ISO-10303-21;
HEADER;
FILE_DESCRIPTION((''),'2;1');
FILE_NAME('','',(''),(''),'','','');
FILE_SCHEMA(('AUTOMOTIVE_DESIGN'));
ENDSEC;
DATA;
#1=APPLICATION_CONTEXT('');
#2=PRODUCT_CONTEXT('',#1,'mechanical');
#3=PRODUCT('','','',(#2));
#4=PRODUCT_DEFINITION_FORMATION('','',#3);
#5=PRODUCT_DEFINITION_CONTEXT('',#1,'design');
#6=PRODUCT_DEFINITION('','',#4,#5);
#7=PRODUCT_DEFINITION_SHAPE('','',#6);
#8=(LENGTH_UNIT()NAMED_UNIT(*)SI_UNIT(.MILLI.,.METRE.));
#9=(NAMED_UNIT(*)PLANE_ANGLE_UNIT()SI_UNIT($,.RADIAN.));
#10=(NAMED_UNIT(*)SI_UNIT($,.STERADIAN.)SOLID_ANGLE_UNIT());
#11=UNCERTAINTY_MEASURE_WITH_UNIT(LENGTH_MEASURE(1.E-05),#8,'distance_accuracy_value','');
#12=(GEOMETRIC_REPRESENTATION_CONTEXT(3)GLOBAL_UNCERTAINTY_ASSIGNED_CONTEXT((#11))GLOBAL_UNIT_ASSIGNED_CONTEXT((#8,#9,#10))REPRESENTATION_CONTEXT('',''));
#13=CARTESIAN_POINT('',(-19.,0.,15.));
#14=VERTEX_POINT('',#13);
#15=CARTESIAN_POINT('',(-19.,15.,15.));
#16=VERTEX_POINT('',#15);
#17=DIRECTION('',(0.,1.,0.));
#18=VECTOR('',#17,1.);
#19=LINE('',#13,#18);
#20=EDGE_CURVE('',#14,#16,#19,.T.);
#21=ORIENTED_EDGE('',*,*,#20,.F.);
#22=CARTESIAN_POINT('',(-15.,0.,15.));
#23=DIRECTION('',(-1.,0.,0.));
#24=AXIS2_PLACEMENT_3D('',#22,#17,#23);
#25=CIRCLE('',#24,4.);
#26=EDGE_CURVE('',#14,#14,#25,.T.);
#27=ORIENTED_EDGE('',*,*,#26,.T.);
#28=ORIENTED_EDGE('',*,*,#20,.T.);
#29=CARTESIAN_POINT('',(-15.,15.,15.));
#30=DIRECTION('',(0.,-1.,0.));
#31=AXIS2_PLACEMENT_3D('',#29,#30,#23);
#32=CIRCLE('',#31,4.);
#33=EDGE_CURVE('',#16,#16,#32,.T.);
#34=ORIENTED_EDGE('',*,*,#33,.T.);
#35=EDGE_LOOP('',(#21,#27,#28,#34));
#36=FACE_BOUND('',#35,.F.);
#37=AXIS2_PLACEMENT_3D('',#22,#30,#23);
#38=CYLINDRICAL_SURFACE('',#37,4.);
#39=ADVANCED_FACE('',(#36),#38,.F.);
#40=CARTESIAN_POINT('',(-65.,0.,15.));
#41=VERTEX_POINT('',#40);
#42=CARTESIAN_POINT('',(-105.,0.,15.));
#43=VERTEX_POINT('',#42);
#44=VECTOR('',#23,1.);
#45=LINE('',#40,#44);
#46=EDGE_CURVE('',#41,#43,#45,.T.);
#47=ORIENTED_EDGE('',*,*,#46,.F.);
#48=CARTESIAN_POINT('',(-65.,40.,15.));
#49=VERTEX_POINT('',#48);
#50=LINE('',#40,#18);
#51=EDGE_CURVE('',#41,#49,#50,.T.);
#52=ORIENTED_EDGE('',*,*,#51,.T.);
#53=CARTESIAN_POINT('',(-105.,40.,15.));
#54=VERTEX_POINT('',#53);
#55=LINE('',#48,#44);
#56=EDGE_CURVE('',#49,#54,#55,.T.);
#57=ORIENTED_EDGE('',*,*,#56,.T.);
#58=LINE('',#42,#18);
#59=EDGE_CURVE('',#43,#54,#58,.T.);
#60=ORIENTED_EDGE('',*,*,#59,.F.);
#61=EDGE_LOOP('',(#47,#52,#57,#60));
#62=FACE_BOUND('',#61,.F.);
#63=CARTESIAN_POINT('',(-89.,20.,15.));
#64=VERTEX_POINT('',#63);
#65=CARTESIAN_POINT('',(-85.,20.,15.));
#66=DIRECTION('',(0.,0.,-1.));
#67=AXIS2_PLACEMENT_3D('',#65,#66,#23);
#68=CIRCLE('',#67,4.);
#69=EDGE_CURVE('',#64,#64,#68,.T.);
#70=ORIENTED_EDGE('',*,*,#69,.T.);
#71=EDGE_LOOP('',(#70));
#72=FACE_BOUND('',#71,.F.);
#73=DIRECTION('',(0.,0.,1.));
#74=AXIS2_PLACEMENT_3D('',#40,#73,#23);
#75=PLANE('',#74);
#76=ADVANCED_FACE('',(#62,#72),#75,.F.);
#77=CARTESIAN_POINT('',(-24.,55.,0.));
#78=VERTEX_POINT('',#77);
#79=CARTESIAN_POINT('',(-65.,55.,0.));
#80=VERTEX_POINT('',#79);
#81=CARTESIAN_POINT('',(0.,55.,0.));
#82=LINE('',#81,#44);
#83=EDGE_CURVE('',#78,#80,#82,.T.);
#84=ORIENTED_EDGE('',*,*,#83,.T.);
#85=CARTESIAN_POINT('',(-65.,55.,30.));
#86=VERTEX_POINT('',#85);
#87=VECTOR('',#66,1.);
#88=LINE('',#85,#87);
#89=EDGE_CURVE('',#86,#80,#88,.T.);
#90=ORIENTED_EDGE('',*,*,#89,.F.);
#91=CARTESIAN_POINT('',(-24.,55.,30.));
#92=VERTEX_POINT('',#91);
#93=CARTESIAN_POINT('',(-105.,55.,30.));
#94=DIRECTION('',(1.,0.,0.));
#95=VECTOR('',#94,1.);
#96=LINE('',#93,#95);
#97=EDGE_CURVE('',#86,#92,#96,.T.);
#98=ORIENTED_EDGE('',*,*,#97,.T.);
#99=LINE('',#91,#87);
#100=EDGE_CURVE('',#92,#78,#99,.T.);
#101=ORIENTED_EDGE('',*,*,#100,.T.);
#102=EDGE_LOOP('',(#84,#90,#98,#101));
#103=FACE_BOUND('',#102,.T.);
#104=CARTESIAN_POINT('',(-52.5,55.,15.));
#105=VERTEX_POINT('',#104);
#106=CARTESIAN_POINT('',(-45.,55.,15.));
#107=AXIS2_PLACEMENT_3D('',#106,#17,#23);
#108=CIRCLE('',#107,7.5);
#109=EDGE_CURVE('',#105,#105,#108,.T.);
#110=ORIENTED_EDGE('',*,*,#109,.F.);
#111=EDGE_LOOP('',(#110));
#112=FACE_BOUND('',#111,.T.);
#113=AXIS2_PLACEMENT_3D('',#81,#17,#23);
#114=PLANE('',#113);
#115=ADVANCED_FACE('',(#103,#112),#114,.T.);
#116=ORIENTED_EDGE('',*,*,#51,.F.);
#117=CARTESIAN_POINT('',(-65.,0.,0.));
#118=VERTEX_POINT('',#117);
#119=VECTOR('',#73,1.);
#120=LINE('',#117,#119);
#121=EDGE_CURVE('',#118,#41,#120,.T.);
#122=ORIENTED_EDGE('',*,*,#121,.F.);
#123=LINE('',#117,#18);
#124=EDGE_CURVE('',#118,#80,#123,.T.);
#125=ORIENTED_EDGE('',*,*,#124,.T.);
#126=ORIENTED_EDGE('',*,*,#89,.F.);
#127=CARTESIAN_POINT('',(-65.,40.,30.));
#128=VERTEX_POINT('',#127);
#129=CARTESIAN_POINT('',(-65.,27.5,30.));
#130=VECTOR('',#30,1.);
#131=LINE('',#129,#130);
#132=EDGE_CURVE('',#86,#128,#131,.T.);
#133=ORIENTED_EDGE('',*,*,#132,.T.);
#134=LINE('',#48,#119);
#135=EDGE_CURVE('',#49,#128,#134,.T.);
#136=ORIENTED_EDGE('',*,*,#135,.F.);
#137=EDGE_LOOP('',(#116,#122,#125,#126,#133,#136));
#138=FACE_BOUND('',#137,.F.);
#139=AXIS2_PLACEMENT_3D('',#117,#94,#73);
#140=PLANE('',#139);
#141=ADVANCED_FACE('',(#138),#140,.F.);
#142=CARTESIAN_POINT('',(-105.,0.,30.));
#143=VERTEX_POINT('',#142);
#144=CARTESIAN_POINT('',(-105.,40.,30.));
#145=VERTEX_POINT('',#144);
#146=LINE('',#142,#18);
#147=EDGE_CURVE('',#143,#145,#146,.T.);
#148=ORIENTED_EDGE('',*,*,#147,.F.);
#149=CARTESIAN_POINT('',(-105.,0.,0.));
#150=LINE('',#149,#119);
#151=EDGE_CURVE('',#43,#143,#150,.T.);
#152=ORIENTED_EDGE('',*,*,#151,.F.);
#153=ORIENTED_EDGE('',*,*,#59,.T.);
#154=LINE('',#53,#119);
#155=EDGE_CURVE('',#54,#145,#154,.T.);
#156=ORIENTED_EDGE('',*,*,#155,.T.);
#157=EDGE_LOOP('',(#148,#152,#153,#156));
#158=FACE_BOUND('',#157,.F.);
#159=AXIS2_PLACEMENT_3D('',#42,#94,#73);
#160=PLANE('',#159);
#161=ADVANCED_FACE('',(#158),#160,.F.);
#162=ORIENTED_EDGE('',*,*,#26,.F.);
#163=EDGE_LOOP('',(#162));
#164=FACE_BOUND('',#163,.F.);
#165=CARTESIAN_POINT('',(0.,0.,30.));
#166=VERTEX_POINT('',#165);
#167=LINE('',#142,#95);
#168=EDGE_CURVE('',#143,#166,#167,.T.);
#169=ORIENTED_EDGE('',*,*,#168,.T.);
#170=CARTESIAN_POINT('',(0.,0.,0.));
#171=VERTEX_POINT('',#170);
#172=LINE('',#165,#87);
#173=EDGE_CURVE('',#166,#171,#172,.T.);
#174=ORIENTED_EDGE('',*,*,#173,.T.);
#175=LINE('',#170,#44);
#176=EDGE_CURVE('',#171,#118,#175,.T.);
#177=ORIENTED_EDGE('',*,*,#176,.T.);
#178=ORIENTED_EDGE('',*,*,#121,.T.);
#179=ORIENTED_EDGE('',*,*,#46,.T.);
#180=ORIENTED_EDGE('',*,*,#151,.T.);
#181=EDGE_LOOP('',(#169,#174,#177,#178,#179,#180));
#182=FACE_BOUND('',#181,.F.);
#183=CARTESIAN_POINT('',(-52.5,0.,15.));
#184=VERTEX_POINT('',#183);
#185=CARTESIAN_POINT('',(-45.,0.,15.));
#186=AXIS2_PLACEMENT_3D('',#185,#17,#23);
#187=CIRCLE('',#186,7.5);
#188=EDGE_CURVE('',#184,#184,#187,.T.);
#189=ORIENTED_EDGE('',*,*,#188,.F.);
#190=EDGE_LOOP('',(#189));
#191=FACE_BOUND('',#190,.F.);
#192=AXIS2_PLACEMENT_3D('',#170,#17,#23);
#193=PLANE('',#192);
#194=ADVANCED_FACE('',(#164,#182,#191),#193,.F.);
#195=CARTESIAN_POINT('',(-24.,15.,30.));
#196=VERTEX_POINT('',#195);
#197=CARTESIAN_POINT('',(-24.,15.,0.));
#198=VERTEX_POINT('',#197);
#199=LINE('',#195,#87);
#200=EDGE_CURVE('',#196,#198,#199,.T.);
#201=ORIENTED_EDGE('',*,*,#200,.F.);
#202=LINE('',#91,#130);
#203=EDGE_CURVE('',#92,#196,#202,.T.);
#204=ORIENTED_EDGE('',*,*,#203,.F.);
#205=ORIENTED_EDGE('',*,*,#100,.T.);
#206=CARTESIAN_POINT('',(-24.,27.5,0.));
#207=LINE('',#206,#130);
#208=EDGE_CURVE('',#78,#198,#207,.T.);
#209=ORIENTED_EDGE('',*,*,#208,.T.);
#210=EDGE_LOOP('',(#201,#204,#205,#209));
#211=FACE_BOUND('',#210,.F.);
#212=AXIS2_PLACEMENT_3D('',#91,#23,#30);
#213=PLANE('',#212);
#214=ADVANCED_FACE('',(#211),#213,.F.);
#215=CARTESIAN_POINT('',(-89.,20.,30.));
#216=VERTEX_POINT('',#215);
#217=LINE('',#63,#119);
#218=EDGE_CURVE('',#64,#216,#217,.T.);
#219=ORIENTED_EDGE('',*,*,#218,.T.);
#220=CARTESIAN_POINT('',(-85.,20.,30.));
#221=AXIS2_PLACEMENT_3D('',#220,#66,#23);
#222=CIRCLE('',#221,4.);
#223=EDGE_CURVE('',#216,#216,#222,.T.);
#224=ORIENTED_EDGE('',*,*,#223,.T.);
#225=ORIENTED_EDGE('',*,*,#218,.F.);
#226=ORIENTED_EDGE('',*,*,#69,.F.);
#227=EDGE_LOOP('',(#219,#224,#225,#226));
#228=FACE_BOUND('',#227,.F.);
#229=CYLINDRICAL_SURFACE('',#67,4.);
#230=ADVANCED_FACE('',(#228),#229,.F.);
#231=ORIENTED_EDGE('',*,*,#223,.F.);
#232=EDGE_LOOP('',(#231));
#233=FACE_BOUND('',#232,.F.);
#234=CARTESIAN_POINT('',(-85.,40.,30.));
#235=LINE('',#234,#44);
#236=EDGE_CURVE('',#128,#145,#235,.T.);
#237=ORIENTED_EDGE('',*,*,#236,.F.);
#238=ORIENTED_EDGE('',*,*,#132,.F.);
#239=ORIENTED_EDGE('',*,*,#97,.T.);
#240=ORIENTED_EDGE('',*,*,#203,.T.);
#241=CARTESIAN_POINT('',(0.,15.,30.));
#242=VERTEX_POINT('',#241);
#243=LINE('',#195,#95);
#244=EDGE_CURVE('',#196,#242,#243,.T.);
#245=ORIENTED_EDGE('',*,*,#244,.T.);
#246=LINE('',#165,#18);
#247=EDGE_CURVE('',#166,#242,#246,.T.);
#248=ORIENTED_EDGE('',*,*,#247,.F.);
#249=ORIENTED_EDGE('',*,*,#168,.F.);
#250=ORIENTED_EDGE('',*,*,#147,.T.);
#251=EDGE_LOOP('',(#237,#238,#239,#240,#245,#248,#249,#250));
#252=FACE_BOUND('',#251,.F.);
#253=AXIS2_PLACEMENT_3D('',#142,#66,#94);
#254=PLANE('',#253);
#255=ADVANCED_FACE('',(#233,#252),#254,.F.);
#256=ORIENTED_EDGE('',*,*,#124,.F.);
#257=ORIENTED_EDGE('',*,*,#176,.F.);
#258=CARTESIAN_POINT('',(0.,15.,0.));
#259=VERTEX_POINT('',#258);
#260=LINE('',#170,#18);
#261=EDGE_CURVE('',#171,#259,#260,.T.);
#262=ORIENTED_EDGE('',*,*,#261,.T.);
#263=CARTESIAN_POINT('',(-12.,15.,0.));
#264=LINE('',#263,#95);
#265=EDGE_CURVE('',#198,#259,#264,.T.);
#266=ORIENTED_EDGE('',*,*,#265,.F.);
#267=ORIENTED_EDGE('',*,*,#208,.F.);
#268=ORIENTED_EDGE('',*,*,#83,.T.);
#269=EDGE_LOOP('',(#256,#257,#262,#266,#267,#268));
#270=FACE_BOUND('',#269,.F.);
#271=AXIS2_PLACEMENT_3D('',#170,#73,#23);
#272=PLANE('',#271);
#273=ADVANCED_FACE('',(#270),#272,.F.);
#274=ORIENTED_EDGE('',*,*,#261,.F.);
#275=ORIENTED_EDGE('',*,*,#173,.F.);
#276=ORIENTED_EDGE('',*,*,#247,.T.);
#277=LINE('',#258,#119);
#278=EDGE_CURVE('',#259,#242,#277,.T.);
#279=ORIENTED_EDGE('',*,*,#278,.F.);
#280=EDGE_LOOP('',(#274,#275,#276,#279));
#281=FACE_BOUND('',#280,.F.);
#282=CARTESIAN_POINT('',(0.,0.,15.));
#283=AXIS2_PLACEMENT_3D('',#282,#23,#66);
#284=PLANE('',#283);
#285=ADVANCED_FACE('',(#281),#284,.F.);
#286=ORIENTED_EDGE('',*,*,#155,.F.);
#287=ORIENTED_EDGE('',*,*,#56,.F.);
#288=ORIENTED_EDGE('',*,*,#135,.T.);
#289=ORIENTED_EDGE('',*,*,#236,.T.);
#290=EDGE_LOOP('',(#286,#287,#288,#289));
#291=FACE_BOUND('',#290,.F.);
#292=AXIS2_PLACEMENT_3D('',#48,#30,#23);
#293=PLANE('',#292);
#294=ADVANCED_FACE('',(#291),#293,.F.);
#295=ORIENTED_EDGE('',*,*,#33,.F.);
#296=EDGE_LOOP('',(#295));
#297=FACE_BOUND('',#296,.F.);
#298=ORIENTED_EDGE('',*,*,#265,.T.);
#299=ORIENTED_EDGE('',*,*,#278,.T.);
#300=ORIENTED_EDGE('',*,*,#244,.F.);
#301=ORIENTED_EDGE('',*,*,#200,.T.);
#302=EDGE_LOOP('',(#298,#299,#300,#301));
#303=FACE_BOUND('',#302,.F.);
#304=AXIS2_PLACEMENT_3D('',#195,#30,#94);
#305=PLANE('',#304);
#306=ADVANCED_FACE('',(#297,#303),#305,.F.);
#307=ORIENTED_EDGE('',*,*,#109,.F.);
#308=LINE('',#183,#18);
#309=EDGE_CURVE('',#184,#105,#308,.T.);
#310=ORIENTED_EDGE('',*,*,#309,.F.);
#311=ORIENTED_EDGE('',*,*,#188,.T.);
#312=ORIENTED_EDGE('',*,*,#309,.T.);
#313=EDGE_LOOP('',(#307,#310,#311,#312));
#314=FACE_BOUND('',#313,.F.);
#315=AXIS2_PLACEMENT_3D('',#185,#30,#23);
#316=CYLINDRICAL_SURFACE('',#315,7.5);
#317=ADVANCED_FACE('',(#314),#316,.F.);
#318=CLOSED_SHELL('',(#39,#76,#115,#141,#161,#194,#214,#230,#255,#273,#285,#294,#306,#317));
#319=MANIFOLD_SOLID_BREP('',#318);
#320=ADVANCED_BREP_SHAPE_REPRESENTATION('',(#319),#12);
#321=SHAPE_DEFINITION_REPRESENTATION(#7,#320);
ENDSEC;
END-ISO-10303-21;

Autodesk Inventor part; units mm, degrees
ref_plane "YZ Plane" through (0, 0, 0) normal (1, 0, 0) x (0, 1, 0)
ref_plane "XZ Plane" through (0, 0, 0) normal (0, 1, 0) x (-1, 0, 0)
ref_plane "XY Plane" through (0, 0, 0) normal (0, 0, 1) x (1, 0, 0)
sketch "Sketch1" plane through (0, 0, 0) normal (0, 1, 0) x (-1, 0, 0)
  line L0 (0, 0) -> (105, 0)
  line L1 (105, 0) -> (105, 30)
  line L2 (105, 30) -> (0, 30)
  line L3 (0, 30) -> (0, 0)
  line L4 (105, 0) -> (65, 0)
  line L5 (65, 0) -> (65, 15)
  line L6 (65, 15) -> (105, 15)
  line L7 (105, 15) -> (105, 0)
  line L8 (0, 15) -> (15, 15)
  line L9 (15, 15) -> (45, 15)
  circle A0 centre (15, 15) radius 4
  circle A1 centre (45, 15) radius 7.5
  dimension "d0" = 105
  dimension "d1" = 30
  dimension "d2" = 40
  dimension "d3" = 15
  dimension "d4" = 15
  dimension "d5" = 30
  dimension "d6" = 8
  dimension "d7" = 15
extrude "Extrusion1" add sketch "Sketch1" along normal blind 55 contours L3 L2 L1 L6 L5 L0
sketch "Sketch2" plane through (-105, 0, 30) normal (0, 0, 1) x (1, 0, 0)
  line L0 (105, 55) -> (81, 55)
  line L1 (81, 55) -> (81, 15)
  line L2 (81, 15) -> (105, 15)
  line L3 (105, 15) -> (105, 55)
  dimension "d10" = 24
  dimension "d11" = 40
extrude "Extrusion2" cut sketch "Sketch2" against normal blind 55
sketch "Sketch3" plane through (-65, 0, 15) normal (0, 0, -1) x (-1, 0, 0)
  line L0 (40, 55) -> (0, 55)
  line L1 (0, 55) -> (0, 40)
  line L2 (0, 40) -> (40, 40)
  line L3 (40, 40) -> (40, 55)
  circle A0 centre (20, 20) radius 4
  point P0 (-65, 0)
  dimension "d15" = 15
  dimension "d16" = 8
extrude "Extrusion3" cut sketch "Sketch3" against normal blind 55
properties part number "X_Top_PullySide_V2" material "Birch"
